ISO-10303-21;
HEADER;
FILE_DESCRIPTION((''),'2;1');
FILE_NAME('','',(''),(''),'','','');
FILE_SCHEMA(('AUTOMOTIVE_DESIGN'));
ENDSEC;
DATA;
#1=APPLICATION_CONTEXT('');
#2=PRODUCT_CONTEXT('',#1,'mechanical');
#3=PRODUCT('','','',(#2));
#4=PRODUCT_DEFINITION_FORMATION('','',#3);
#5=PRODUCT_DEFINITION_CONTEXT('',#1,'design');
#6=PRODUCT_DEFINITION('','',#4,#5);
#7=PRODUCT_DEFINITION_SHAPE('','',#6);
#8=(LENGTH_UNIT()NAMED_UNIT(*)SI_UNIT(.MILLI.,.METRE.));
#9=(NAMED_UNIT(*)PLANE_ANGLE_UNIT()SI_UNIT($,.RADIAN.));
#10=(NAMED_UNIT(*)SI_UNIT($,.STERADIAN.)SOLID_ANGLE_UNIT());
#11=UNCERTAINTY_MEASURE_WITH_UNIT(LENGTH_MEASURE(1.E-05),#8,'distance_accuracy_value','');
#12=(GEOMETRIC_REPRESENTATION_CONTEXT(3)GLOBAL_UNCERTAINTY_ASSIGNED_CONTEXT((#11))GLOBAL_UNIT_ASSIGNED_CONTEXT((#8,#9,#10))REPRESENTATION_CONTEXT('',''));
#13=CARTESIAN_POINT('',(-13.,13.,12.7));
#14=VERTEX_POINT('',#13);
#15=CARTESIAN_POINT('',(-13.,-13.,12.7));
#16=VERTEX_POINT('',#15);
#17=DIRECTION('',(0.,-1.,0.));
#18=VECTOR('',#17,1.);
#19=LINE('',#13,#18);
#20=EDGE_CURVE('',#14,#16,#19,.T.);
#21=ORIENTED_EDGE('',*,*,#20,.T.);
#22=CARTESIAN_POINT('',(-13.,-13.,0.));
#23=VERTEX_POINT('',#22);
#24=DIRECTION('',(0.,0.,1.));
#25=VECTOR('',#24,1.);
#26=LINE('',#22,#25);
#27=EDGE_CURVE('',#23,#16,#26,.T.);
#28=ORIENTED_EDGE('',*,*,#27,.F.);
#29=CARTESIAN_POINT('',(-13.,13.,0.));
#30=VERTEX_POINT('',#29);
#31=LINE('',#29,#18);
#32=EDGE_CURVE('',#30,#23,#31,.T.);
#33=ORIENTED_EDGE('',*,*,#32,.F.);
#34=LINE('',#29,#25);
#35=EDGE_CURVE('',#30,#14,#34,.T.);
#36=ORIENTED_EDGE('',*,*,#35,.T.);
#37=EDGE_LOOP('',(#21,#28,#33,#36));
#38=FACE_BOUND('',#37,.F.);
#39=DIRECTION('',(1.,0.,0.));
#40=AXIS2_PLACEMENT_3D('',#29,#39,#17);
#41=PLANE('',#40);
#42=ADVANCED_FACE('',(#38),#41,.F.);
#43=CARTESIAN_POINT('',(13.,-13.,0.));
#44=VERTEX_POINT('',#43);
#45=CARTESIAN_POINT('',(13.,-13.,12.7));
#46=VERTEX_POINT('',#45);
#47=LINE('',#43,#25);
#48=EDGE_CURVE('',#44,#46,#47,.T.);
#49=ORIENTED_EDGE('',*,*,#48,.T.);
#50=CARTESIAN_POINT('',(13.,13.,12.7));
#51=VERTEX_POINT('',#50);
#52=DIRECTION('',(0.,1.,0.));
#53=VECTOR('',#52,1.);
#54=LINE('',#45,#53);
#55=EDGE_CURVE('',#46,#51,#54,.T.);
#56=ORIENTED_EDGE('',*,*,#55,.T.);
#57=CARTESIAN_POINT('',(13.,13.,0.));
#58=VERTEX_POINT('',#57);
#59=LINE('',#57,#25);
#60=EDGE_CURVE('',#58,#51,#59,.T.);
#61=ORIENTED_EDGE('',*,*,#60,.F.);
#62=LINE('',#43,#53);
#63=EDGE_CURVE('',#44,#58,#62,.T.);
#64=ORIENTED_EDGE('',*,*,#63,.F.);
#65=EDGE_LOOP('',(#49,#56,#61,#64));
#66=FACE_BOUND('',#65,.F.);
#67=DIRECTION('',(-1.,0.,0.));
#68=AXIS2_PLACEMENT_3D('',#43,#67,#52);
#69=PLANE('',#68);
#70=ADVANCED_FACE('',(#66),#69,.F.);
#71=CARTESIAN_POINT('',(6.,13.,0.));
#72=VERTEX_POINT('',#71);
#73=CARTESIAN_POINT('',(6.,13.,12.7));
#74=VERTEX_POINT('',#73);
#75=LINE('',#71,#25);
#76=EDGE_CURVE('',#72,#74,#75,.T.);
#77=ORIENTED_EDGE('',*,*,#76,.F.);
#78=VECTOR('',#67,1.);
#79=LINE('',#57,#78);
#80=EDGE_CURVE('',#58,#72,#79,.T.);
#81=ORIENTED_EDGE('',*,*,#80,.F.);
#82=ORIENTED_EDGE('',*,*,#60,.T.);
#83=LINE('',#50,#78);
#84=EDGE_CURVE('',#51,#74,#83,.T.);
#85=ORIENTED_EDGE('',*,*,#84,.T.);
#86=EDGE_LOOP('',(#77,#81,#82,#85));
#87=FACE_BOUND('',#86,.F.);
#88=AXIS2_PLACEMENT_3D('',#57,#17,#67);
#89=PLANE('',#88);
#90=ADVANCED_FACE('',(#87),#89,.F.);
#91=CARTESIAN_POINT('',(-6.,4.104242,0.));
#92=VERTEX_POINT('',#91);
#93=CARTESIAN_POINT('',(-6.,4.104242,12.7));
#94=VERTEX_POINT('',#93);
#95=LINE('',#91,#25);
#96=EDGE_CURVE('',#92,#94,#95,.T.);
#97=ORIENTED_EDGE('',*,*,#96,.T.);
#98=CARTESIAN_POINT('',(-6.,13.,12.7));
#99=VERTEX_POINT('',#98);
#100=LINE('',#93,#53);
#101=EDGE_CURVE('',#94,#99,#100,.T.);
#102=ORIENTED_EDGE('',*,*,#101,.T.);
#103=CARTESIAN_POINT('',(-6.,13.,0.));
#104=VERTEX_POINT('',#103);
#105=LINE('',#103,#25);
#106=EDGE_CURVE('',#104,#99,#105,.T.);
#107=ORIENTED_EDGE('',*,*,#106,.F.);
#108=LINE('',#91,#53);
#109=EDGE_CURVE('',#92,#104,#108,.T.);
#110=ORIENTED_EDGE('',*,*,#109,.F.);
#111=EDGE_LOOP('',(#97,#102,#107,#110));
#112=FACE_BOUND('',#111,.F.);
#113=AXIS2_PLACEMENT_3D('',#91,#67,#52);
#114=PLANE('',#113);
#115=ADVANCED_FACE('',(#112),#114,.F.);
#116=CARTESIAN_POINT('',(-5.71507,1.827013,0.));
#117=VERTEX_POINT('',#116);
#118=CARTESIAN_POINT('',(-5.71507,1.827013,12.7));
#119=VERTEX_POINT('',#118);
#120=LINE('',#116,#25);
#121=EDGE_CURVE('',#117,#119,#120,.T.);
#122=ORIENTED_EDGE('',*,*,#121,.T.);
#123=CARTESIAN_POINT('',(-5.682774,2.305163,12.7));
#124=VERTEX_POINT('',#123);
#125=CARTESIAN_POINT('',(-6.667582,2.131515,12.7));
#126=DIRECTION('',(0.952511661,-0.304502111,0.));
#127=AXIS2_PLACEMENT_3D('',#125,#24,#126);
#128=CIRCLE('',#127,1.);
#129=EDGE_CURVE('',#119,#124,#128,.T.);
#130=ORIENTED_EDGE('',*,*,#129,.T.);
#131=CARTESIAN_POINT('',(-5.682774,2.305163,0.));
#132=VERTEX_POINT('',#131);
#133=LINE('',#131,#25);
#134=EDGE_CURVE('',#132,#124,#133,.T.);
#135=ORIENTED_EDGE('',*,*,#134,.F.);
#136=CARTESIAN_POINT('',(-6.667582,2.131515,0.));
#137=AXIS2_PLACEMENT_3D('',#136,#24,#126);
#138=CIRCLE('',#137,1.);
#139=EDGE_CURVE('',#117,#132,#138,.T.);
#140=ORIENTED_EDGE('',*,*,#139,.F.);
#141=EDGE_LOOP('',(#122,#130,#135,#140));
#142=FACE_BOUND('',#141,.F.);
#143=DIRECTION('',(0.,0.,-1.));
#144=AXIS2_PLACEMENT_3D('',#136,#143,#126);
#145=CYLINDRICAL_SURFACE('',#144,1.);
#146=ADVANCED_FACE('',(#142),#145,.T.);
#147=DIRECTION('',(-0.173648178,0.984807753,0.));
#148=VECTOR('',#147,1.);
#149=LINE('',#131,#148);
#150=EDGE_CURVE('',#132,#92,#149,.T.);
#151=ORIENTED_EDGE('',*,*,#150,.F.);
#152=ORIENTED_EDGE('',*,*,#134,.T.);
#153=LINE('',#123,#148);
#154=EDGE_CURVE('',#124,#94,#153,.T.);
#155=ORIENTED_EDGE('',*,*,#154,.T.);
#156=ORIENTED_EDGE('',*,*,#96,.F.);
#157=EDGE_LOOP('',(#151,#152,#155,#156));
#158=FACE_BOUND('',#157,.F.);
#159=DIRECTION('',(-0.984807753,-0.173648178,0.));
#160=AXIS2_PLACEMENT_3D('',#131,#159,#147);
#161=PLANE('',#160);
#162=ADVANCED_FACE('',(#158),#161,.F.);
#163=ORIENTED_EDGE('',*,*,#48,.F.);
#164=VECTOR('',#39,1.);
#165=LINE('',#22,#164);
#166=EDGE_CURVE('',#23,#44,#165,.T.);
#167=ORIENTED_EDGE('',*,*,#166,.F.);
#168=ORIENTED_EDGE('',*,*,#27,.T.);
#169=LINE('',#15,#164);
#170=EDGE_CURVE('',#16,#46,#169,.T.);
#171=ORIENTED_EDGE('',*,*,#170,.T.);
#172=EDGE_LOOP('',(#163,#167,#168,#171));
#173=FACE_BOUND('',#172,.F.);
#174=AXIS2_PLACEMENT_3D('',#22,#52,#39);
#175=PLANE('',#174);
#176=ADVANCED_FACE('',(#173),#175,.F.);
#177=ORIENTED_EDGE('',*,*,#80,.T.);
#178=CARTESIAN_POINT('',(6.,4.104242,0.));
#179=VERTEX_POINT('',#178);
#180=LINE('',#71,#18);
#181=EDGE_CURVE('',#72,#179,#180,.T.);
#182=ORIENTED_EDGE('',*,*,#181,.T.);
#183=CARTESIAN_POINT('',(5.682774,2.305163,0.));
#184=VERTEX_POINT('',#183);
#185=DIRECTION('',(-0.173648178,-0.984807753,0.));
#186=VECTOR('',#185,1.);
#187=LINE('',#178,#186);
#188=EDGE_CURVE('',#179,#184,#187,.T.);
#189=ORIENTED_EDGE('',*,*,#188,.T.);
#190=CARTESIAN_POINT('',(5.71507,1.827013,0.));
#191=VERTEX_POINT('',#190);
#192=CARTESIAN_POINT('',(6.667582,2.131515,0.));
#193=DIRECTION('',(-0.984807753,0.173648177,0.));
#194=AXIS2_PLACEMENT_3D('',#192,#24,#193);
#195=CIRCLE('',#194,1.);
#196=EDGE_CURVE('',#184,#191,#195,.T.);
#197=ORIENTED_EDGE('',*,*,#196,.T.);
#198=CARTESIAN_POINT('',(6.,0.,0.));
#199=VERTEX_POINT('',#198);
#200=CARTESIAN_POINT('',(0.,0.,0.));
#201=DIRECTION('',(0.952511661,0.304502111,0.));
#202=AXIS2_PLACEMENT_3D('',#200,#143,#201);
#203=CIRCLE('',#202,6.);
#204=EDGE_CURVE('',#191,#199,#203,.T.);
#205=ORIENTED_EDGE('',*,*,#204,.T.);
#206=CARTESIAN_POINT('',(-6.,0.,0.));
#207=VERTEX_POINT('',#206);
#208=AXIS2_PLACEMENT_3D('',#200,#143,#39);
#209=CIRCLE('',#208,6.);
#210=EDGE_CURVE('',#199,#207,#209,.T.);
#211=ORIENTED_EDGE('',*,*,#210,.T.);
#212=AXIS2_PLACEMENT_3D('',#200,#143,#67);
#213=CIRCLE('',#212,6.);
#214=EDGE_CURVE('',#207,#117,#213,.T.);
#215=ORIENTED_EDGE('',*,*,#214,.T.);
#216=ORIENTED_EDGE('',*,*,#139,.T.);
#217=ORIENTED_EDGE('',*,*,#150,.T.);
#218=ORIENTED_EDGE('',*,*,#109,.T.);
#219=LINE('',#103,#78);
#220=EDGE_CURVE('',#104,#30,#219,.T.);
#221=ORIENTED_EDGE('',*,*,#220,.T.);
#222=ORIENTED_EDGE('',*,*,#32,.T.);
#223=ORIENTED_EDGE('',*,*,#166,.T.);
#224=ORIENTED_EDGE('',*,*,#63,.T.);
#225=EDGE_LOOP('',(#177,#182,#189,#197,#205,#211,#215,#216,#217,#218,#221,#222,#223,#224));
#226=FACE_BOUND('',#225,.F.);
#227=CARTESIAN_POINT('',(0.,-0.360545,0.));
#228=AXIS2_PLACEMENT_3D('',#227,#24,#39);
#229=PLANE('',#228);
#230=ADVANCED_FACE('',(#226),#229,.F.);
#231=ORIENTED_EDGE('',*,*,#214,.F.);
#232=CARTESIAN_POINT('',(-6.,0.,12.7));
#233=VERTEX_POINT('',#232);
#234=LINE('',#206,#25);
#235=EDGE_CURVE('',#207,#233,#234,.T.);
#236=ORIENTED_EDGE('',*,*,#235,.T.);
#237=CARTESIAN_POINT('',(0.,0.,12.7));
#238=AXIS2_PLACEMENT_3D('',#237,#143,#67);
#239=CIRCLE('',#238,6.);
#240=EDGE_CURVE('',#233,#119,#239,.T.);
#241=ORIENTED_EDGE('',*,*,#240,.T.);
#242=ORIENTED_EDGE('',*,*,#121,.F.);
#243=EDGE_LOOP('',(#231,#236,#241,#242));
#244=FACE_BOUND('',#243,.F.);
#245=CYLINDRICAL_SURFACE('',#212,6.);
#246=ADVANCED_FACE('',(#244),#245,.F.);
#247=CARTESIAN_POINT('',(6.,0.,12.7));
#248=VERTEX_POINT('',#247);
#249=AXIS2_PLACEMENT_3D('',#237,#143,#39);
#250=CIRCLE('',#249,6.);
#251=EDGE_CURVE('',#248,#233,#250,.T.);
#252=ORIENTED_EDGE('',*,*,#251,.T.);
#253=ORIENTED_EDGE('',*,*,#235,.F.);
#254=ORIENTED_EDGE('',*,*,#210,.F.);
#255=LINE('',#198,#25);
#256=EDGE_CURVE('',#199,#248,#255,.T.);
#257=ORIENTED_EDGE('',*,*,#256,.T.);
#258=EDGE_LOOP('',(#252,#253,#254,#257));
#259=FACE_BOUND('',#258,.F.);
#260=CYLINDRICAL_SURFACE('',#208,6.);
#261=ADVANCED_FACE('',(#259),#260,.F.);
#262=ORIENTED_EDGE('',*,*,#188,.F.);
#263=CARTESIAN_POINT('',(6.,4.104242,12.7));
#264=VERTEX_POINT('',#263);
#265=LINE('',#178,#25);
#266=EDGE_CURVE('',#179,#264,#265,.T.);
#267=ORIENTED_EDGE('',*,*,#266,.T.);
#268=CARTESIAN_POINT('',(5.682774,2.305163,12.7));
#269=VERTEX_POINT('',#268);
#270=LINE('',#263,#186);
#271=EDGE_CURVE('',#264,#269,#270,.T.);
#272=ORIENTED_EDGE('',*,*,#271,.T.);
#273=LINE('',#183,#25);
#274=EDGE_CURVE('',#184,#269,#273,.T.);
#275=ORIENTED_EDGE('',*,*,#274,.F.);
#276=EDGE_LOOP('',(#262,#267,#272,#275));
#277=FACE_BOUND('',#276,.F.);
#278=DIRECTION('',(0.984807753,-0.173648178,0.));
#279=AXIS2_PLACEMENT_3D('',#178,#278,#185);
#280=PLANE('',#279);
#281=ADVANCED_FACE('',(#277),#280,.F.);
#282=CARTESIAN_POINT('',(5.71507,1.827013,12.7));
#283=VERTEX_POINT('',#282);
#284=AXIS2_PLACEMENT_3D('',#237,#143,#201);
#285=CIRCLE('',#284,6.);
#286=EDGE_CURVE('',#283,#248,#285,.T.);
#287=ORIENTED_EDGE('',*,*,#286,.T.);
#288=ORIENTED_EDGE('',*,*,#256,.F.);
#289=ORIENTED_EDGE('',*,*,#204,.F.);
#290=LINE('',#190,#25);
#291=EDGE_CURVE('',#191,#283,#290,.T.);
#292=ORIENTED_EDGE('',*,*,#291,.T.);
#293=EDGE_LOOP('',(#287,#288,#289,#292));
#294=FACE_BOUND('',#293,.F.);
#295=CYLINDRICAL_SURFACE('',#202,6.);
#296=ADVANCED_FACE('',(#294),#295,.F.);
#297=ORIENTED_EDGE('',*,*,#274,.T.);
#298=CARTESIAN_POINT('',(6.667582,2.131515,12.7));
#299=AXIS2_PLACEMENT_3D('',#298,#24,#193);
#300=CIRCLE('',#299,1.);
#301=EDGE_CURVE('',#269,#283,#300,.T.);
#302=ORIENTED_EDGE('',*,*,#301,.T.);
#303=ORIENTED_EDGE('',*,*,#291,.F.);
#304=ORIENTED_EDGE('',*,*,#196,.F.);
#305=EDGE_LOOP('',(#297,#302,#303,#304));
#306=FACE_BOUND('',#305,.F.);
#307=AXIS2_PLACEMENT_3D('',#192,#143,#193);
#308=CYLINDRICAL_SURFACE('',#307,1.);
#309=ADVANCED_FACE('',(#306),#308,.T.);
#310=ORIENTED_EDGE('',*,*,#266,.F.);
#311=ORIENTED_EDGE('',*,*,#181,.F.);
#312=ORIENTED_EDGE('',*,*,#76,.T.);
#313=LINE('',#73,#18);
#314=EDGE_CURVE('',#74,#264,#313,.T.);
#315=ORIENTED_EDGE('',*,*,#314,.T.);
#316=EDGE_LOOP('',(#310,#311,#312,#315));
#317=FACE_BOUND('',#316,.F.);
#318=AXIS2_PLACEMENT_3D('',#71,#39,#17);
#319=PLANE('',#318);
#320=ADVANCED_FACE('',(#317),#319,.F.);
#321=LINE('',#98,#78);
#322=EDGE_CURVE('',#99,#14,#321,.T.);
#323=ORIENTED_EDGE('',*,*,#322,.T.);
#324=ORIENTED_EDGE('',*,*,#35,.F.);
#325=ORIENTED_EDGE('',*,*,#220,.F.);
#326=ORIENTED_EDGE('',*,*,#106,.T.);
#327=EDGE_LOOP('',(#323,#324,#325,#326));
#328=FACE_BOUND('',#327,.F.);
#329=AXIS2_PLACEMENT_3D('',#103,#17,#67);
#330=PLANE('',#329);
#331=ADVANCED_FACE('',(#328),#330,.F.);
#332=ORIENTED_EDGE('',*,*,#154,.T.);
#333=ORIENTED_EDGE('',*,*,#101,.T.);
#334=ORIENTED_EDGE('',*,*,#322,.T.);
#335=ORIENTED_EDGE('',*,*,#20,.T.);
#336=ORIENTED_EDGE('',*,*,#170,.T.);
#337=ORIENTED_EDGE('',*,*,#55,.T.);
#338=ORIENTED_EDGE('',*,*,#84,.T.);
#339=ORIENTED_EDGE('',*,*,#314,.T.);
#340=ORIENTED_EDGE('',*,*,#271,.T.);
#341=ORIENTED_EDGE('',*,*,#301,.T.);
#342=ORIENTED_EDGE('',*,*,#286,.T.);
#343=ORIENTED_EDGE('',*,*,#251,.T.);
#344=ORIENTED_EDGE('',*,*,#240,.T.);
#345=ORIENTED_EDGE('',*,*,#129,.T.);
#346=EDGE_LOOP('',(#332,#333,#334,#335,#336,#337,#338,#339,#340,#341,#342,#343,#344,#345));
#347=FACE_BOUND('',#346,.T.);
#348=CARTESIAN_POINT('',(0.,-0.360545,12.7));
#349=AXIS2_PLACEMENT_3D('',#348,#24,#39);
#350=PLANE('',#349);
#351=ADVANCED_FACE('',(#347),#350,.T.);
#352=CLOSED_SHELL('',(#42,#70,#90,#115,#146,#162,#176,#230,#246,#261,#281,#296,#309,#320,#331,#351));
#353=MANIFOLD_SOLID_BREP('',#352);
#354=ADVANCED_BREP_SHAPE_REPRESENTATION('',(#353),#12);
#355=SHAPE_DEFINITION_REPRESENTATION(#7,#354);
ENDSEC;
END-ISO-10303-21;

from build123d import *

# Parameters (mm, degrees)
F1_DEPTH = 12.7


# Not quite as in the source:
# - a length typed as a fraction of an inch, garbled in the dataset ("3 / 203.2 mm" for 3/8 in), is restored


with BuildPart() as f1:
    # F0 (on Top) → F1 (new body)
    with BuildSketch(Plane.XY):
        with BuildLine():
            Line((-6, 13), (-13, 13))
            Line((-13, 13), (-13, -13))
            Line((-13, -13), (13, -13))
            Line((13, -13), (13, 13))
            Line((13, 13), (6, 13))
            Line((6, 13), (6, 4.1042417199))
            Line((6, 4.1042417199), (5.6827738736, 2.3051629565))
            ThreePointArc((5.6827738736, 2.3051629565), (5.6698549343, 2.0641245171), (5.7150699657, 1.8270126676))
            ThreePointArc((5.7150699657, 1.8270126676), (5.9283395565, 0.9245485942), (6, 0))
            ThreePointArc((6, 0), (0, -6), (-6, 0))
            ThreePointArc((-6, 0), (-5.9283395565, 0.9245485942), (-5.7150699657, 1.8270126676))
            ThreePointArc((-5.7150699657, 1.8270126676), (-5.6698549343, 2.0641245171), (-5.6827738736, 2.3051629565))
            Line((-5.6827738736, 2.3051629565), (-6, 4.1042417199))
            Line((-6, 4.1042417199), (-6, 13))
        make_face()
    extrude(amount=F1_DEPTH)


solid = f1.part
